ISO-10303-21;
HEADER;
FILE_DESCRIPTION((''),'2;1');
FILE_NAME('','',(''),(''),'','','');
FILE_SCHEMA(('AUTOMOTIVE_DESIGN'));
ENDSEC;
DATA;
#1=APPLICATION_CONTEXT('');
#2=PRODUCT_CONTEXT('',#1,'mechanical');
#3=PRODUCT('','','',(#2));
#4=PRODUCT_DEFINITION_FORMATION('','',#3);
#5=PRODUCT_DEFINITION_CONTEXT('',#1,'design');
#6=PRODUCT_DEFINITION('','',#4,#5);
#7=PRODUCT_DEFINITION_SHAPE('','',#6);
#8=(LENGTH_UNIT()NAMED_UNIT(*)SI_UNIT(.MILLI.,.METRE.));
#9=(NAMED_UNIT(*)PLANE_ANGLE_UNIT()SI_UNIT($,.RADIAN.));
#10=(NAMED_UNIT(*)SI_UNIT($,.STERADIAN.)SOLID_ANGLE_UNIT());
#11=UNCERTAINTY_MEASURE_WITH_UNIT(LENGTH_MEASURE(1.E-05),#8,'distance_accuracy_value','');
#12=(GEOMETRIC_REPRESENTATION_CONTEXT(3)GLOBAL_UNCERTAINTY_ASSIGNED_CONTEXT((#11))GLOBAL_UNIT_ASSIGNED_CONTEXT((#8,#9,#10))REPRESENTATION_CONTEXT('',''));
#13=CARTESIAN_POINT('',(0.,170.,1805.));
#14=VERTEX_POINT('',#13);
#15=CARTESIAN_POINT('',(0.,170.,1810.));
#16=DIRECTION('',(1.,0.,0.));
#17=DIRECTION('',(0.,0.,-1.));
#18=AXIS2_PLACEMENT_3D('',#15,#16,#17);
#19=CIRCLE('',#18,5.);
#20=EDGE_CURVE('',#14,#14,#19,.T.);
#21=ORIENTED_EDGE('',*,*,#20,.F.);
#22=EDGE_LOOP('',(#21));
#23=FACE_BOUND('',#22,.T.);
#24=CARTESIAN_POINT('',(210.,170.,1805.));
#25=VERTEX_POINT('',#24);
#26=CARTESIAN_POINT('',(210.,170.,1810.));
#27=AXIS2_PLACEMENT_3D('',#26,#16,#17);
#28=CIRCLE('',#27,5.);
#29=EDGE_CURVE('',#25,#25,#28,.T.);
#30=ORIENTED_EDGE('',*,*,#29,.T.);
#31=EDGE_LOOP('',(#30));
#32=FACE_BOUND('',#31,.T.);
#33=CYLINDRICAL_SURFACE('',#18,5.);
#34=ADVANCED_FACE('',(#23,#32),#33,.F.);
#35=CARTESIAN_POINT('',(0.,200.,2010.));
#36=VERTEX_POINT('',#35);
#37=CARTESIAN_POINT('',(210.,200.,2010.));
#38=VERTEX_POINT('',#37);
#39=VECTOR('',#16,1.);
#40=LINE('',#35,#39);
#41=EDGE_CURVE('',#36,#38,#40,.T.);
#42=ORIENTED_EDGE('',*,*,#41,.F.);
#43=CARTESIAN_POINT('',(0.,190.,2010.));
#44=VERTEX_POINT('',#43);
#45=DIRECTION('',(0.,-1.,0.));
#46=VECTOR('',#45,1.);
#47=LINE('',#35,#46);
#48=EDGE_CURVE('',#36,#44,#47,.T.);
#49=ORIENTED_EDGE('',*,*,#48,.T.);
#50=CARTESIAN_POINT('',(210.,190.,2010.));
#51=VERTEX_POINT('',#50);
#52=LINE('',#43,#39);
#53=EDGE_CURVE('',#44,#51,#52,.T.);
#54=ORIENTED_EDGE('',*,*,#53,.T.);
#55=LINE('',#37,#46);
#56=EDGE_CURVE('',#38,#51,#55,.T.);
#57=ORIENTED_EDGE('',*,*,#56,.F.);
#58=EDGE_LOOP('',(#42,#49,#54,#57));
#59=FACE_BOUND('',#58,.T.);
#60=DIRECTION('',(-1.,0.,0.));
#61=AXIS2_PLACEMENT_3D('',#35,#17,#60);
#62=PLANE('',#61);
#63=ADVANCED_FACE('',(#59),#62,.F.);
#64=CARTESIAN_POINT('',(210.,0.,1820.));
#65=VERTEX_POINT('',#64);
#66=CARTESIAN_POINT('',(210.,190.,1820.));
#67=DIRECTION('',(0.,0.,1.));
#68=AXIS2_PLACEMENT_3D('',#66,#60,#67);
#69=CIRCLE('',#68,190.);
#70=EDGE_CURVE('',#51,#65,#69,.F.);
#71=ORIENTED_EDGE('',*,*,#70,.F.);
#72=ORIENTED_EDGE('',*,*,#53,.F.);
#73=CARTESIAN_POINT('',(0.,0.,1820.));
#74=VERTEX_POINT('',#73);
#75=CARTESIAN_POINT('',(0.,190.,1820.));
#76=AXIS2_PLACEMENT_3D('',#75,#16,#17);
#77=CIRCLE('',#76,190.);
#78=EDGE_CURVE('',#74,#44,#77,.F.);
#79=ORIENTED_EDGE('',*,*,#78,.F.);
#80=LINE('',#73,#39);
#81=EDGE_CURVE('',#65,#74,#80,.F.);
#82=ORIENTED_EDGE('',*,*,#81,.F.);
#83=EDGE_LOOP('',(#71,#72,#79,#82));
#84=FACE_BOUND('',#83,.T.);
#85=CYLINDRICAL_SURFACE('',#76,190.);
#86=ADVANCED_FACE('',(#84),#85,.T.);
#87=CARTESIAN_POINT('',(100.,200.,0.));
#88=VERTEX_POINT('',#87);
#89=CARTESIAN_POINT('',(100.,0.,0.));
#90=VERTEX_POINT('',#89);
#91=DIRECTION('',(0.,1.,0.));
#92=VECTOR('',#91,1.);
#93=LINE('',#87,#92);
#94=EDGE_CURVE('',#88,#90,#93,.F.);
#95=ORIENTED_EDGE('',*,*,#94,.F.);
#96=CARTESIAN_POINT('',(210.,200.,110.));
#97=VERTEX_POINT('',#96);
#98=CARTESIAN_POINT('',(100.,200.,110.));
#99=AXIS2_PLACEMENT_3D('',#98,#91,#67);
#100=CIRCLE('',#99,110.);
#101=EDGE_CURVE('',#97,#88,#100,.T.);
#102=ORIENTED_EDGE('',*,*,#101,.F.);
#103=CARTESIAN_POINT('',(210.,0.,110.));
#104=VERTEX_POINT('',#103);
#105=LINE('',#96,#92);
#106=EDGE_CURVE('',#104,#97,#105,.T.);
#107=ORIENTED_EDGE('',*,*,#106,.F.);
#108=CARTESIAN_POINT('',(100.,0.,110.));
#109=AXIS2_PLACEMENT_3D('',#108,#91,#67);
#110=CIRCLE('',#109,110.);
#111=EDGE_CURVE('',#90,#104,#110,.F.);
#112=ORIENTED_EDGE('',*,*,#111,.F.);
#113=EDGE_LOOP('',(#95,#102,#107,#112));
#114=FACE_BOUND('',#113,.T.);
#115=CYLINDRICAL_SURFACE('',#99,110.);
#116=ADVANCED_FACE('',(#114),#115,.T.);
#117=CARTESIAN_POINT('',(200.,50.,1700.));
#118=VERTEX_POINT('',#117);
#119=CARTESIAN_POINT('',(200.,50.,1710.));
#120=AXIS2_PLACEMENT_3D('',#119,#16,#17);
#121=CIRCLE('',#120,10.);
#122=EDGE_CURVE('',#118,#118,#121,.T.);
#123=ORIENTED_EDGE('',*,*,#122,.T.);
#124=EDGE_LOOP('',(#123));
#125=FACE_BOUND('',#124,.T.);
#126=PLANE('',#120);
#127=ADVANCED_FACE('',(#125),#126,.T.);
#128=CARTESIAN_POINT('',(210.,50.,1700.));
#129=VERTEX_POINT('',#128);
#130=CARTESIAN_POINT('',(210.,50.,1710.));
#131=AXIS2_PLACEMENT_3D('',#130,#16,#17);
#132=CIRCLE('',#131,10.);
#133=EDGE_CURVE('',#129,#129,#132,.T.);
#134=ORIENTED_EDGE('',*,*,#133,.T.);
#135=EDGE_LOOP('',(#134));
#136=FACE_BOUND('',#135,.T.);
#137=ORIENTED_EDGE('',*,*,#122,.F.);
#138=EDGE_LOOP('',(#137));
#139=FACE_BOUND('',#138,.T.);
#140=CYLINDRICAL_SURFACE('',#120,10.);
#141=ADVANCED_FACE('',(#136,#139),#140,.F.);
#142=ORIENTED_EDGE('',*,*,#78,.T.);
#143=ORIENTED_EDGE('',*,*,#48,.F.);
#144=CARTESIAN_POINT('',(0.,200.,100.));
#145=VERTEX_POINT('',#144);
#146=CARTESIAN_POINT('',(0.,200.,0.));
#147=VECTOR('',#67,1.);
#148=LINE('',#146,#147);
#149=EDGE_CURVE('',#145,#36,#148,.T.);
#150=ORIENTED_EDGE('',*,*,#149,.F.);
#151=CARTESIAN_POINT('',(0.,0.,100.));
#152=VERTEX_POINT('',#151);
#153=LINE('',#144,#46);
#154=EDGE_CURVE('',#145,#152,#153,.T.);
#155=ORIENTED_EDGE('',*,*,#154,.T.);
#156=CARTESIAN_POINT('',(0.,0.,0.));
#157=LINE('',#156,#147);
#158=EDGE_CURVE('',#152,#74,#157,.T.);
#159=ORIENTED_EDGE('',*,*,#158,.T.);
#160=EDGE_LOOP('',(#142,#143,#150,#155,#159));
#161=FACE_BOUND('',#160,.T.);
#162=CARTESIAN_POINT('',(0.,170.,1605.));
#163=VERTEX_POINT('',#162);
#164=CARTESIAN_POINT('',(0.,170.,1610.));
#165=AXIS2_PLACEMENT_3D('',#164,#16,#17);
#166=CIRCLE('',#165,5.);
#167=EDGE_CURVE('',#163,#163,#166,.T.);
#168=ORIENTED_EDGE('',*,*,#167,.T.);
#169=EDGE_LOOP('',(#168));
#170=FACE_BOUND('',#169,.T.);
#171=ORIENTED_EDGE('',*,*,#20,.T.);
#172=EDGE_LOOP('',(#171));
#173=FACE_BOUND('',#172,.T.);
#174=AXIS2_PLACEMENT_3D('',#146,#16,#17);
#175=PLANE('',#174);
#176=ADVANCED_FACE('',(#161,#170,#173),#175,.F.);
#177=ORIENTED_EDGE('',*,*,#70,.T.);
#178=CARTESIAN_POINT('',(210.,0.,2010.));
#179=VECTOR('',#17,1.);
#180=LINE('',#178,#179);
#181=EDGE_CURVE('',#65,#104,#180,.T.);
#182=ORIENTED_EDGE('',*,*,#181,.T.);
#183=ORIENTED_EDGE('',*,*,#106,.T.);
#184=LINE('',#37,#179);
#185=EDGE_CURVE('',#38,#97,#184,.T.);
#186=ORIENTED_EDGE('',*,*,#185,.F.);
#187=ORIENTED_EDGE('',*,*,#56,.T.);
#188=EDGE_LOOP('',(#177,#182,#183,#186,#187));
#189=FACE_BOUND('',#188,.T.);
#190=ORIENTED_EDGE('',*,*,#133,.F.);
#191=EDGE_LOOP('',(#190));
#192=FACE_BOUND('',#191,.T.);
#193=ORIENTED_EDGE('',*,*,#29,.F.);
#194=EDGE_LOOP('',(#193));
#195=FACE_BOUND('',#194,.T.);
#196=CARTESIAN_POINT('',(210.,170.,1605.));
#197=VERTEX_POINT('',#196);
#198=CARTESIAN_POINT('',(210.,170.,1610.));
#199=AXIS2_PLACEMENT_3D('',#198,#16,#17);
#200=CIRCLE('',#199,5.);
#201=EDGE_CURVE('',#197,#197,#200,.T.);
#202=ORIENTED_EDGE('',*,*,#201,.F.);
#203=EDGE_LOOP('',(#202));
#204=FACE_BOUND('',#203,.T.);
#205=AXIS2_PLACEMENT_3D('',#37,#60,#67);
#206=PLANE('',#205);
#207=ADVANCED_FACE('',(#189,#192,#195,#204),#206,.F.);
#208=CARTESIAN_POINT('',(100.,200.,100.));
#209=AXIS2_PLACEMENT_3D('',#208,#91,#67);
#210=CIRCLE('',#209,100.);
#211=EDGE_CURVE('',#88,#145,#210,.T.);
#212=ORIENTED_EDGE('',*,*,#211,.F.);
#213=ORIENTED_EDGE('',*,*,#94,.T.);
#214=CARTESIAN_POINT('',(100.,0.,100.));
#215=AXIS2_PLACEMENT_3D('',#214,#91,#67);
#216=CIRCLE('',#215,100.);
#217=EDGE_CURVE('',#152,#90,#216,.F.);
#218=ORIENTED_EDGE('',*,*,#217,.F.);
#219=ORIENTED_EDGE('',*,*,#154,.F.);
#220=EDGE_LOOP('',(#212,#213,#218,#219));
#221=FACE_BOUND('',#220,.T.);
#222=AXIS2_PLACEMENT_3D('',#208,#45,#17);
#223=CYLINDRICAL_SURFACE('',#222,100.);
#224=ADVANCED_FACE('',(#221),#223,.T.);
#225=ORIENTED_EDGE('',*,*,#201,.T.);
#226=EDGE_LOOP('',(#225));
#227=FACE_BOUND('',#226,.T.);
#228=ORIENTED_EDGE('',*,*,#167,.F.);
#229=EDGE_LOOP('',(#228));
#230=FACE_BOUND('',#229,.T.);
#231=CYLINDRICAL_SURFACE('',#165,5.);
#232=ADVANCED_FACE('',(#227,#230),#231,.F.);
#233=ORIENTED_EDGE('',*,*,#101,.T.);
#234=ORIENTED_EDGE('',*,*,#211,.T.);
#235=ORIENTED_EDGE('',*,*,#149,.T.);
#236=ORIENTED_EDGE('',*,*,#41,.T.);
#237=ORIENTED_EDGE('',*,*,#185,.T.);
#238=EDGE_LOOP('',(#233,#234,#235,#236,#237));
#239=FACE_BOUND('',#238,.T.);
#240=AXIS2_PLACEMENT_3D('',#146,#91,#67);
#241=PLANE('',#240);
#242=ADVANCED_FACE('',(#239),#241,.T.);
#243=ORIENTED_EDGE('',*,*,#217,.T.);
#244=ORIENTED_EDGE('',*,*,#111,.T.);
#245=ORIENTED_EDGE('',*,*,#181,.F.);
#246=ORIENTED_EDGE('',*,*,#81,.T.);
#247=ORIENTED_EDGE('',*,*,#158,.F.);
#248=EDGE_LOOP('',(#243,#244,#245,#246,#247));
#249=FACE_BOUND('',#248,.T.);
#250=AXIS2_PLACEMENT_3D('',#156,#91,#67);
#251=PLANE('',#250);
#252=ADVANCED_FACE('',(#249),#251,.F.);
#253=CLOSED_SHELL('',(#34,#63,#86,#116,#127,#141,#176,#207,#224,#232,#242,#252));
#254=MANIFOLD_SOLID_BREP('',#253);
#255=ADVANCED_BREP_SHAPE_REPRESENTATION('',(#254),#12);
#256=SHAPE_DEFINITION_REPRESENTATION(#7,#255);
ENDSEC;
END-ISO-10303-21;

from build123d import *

# Parameters (mm, degrees)
SKETCH1_W           = 210
SKETCH1_H           = 2010
BOSS_EXTRUDE1_DEPTH = 200
FILLET1_R           = 110
FILLET2_R           = 100
FILLET3_R           = 190
SKETCH3_R           = 10
CUT_EXTRUDE1_DEPTH  = 10
SKETCH4_R           = 5
CUT_EXTRUDE2_DEPTH  = 2031.812645224


with BuildPart() as part:
    # Sketch1 → Boss-Extrude1 (new body)
    with BuildSketch(Plane(origin=(0, 0, 0), x_dir=(1, 0, 0), z_dir=(0, 1, 0))):
        with Locations((105, -1005)):
            Rectangle(SKETCH1_W, SKETCH1_H)
    extrude(amount=BOSS_EXTRUDE1_DEPTH)

    # Fillet1
    fillet1_edges = [part.edges().sort_by_distance(p)[0] for p in [
        (210, 100, 0),
    ]]
    fillet(fillet1_edges, radius=FILLET1_R)

    # Fillet2
    fillet2_edges = [part.edges().sort_by_distance(p)[0] for p in [
        (0, 100, 0),
    ]]
    fillet(fillet2_edges, radius=FILLET2_R - 0.0001)  # a hair under: the kernel refuses the full size

    # Fillet3
    fillet3_edges = [part.edges().sort_by_distance(p)[0] for p in [
        (105, 0, 2010),
    ]]
    fillet(fillet3_edges, radius=FILLET3_R)

    # Sketch3 → Cut-Extrude1 (cut)
    with BuildSketch(Plane(origin=(210, 0, 0), x_dir=(0, 0, -1), z_dir=(1, 0, 0))):
        with Locations((-1710, 50)):
            Circle(SKETCH3_R)
    extrude(amount=-CUT_EXTRUDE1_DEPTH, mode=Mode.SUBTRACT)

    # Sketch4 → Cut-Extrude2 (cut, through all)
    with BuildSketch(Plane(origin=(210, 0, 0), x_dir=(0, 0, -1), z_dir=(1, 0, 0))):
        with Locations((-1810, 170)):
            Circle(SKETCH4_R)
        with Locations((-1610, 170)):
            Circle(SKETCH4_R)
    extrude(amount=-CUT_EXTRUDE2_DEPTH, mode=Mode.SUBTRACT)


solid = part.part
